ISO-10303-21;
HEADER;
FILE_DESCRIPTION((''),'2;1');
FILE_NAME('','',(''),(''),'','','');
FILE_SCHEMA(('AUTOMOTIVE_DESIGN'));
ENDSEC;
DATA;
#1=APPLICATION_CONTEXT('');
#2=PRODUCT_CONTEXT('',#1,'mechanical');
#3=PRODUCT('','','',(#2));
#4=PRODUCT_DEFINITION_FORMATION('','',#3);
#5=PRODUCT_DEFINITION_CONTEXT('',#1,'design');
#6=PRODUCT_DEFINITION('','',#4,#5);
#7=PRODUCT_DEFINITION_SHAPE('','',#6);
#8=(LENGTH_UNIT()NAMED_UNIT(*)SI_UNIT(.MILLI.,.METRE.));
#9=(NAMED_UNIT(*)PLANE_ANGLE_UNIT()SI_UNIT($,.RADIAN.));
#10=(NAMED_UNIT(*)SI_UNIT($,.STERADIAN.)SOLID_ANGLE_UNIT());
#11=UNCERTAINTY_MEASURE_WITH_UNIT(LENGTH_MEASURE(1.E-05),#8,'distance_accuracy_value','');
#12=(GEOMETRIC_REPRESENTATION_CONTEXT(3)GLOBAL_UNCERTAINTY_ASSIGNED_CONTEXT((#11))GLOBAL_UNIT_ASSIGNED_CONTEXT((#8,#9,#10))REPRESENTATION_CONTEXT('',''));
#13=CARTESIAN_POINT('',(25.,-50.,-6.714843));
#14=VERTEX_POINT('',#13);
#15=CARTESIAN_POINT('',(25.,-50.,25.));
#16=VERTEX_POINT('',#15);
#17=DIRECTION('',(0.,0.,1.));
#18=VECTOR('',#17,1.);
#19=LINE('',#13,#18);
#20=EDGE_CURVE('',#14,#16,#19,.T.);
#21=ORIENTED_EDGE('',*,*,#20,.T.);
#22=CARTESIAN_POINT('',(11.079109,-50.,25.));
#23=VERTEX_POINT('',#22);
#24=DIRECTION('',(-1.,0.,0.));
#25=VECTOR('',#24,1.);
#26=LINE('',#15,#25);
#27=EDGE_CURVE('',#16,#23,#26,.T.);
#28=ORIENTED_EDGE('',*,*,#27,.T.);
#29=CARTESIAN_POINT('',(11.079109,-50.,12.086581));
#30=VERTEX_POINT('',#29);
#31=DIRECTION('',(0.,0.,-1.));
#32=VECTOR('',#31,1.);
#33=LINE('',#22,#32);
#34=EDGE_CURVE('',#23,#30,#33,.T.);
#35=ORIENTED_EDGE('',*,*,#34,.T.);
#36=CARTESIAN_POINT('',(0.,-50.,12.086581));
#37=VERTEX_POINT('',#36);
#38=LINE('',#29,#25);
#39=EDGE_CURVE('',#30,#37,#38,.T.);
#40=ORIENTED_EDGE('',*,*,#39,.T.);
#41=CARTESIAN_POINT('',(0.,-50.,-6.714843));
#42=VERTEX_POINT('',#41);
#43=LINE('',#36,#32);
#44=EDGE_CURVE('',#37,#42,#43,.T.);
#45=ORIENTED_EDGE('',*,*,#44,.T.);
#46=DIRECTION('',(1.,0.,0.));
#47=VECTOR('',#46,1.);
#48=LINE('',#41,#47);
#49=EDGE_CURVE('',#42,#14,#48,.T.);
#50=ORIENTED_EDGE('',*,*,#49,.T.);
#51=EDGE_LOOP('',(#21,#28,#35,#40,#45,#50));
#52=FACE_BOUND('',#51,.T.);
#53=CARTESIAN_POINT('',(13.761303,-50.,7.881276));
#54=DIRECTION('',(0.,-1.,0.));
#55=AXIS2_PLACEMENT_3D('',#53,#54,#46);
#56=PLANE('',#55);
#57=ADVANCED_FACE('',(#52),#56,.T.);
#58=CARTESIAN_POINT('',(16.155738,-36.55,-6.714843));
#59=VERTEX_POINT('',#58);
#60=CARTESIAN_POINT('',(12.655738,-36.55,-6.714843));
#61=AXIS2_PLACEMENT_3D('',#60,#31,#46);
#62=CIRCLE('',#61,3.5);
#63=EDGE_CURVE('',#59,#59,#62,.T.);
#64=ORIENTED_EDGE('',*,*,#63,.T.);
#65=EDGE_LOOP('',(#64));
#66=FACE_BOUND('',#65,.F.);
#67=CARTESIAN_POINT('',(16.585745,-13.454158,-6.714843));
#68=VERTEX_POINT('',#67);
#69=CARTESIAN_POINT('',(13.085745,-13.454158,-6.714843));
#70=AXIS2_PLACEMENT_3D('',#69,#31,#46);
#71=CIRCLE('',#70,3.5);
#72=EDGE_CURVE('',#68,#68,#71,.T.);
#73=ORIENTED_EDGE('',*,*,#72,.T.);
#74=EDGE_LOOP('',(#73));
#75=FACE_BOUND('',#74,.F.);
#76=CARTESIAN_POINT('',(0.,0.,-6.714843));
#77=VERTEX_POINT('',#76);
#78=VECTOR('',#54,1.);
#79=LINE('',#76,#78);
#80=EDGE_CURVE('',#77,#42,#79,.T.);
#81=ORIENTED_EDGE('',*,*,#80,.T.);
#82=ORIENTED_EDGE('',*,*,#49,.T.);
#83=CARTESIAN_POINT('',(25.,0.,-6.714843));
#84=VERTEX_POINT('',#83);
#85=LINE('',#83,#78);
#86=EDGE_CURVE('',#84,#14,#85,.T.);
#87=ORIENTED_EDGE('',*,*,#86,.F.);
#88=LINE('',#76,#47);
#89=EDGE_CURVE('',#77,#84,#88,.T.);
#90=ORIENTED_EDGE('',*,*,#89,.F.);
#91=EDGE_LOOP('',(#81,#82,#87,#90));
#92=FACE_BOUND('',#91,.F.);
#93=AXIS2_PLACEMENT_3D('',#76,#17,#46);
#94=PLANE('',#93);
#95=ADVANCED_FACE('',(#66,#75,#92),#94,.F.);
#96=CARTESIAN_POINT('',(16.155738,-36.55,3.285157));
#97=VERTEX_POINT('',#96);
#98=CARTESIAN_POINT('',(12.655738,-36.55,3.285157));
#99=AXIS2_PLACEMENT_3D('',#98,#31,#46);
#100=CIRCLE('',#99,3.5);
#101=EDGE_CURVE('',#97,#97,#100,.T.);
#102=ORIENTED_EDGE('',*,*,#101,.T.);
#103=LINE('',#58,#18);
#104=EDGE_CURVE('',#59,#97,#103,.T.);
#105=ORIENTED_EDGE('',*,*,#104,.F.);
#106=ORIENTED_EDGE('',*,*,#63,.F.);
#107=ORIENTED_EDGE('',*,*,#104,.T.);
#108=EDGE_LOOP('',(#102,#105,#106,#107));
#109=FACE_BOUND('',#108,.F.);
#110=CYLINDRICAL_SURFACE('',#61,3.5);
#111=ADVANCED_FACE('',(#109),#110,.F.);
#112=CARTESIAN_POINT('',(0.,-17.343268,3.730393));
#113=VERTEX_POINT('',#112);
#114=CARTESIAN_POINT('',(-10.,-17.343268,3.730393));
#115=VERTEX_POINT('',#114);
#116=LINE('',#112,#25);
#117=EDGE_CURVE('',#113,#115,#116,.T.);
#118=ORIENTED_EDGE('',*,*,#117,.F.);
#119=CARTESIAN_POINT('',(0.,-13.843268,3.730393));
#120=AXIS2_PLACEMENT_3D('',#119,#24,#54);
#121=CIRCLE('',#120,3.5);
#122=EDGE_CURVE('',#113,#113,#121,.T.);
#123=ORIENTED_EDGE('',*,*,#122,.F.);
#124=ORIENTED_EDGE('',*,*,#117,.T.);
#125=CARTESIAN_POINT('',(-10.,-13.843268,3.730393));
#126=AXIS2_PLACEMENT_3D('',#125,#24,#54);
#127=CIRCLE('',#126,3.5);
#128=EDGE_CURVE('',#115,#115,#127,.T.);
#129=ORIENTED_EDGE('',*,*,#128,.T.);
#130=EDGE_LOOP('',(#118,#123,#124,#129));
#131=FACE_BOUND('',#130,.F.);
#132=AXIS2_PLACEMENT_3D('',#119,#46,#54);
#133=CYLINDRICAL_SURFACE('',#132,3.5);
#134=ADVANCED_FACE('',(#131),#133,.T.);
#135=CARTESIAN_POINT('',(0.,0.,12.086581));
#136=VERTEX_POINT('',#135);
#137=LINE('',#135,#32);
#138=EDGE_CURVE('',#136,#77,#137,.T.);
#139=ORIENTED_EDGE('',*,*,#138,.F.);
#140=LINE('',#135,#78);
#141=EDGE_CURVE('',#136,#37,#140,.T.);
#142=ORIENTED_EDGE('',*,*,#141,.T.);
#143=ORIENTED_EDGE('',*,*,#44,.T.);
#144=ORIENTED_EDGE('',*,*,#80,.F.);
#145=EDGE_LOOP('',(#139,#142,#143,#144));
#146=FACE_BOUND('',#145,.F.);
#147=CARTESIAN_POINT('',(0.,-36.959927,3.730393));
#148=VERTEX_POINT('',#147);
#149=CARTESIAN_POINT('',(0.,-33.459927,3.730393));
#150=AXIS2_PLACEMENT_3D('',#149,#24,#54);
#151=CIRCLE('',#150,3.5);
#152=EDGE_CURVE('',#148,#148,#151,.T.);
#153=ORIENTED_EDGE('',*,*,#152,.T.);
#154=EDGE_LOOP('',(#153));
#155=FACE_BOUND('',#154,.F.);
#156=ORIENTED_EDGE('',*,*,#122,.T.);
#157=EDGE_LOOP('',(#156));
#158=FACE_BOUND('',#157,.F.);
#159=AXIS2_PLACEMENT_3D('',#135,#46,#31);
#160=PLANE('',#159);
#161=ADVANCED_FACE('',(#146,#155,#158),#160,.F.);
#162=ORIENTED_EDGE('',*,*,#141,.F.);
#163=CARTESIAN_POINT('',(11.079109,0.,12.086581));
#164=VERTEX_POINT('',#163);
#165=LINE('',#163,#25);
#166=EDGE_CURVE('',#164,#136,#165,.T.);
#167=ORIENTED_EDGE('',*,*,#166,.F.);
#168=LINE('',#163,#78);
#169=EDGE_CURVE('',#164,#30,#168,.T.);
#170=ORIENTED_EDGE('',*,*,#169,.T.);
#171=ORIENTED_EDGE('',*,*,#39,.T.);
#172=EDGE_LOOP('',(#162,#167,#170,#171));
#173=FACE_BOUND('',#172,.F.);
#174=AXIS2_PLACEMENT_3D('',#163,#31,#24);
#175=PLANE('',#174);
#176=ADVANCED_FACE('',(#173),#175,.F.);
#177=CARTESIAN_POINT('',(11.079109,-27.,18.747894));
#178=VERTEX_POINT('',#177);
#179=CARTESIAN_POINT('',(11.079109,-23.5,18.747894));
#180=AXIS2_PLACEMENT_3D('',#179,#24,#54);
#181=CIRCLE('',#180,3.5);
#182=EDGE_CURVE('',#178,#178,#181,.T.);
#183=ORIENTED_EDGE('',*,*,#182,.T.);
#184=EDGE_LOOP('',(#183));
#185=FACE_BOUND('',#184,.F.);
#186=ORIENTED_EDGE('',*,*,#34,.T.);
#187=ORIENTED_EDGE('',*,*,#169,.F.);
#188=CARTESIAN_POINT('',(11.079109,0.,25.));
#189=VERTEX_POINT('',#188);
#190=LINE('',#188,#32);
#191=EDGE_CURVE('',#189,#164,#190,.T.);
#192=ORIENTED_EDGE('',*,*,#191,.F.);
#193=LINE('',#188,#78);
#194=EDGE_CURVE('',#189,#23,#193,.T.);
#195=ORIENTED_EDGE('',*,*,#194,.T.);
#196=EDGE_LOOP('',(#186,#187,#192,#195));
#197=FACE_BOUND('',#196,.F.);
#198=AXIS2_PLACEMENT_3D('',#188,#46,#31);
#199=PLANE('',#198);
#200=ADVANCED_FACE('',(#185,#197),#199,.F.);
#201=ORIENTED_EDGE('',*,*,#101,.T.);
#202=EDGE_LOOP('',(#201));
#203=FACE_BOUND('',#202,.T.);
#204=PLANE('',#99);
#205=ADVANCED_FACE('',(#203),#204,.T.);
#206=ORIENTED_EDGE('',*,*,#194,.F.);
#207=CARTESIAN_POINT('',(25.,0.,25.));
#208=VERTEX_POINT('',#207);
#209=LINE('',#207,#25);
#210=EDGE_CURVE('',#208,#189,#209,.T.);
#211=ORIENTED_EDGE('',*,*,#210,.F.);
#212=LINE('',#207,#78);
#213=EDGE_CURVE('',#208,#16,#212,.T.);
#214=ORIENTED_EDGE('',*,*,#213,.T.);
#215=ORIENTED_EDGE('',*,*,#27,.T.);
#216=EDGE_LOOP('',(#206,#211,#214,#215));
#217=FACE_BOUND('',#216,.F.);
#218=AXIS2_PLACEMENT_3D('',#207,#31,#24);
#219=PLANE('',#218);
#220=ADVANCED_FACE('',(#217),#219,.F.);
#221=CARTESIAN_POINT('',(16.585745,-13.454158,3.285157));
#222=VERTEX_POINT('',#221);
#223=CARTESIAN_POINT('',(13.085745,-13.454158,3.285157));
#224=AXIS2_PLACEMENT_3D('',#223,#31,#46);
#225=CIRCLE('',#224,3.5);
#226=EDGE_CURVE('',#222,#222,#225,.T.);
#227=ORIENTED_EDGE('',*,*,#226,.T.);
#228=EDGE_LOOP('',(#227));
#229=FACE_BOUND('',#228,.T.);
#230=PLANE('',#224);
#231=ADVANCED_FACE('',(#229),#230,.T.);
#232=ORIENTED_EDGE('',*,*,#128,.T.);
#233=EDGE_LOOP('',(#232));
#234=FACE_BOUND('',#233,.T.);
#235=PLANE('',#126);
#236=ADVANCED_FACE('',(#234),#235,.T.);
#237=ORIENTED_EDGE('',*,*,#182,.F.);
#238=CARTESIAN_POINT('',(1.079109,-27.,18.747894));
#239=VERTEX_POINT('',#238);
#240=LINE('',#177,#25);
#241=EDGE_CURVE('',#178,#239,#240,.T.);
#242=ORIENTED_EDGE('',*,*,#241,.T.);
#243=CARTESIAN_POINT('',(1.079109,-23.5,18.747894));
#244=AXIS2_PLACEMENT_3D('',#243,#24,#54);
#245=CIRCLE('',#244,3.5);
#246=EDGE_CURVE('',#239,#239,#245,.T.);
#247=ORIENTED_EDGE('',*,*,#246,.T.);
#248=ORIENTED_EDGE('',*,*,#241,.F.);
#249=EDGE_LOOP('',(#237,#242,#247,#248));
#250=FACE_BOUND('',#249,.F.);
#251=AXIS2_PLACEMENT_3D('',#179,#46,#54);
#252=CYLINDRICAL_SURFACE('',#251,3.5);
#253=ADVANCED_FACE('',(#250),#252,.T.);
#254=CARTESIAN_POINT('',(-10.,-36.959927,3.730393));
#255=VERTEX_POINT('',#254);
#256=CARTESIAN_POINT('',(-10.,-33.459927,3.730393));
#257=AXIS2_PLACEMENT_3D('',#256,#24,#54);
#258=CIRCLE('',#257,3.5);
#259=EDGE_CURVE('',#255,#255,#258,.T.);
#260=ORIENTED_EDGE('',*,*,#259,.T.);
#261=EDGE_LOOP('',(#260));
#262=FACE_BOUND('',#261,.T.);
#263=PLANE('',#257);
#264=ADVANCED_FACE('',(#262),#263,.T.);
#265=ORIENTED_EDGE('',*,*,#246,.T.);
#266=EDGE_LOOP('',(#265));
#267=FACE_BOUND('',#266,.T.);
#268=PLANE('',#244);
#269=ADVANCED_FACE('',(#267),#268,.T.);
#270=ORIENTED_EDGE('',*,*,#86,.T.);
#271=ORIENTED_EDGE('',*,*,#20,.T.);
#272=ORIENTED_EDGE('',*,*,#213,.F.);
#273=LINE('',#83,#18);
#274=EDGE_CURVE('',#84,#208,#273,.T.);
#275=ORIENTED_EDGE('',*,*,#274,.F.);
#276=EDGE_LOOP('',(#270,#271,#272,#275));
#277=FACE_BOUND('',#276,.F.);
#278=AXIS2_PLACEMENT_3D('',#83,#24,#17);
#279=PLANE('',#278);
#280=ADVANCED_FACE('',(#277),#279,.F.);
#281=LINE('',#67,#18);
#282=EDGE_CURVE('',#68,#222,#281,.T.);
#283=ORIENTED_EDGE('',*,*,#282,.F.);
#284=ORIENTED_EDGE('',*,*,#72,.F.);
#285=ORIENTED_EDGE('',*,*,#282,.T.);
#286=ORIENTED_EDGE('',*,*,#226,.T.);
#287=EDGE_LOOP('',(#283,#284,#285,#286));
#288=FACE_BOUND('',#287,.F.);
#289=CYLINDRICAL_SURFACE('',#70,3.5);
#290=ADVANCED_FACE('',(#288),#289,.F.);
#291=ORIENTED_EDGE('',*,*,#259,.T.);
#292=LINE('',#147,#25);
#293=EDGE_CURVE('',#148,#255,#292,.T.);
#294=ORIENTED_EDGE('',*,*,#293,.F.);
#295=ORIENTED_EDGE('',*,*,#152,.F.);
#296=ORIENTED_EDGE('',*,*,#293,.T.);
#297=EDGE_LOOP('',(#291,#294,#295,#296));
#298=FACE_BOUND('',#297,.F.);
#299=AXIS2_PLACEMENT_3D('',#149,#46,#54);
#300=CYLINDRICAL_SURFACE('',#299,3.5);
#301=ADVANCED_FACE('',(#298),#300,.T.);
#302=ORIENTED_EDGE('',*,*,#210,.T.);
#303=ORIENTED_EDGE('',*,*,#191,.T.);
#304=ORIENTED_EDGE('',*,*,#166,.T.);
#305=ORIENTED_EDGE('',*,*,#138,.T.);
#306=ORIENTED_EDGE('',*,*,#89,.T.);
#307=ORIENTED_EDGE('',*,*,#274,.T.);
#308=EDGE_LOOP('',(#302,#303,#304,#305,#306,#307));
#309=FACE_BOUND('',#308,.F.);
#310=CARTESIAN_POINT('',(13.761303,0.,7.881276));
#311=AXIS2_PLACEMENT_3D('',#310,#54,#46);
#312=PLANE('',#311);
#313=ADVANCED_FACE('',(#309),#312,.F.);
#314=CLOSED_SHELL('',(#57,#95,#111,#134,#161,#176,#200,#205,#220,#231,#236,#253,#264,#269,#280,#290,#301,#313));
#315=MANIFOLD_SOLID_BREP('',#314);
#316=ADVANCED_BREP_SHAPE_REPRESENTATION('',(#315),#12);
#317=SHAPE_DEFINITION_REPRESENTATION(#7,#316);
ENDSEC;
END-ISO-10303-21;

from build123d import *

# Parameters (mm, degrees)
F1_DEPTH = 50
F2_R     = 3.5
F3_DEPTH = 10
F4_R     = 3.5
F5_DEPTH = 10
F6_R     = 3.5
F7_DEPTH = 10


# Not quite as in the source:
# - a feature names something its author has since deleted; it is built from what else it names


with BuildPart() as f1:
    # F0 (on Front) → F1 (new body)
    with BuildSketch(Plane.XZ):
        Polygon((0, -6.7148432136), (25, -6.7148432136), (25, 25), (11.0791092739, 25), (11.0791092739, 12.0865814388), (0, 12.0865814388), align=None)
    extrude(amount=F1_DEPTH)

    # F2 (on face) → F3 (join)
    with BuildSketch(Plane(origin=(0, 0, 0), x_dir=(0, -1, 0), z_dir=(-1, 0, 0))):
        with Locations((13.8432676521, 3.730392782)):
            Circle(F2_R)
        with Locations((33.459926671, 3.730392782)):
            Circle(F2_R)
    extrude(amount=F3_DEPTH)

    # F4 (on face) → F5 (cut)
    with BuildSketch(Plane(origin=(0, 0, -6.7148432136), x_dir=(1, 0, 0), z_dir=(0, 0, -1))):
        with Locations((12.6557382198, 36.55)):
            Circle(F4_R)
        with Locations((13.0857451583, 13.4541578871)):
            Circle(F4_R)
    extrude(amount=-F5_DEPTH, mode=Mode.SUBTRACT)

    # F6 (on face) → F7 (join)
    with BuildSketch(Plane(origin=(11.0791092739, 0, 0), x_dir=(0, -1, 0), z_dir=(-1, 0, 0))):
        with Locations((23.5, 18.7478940934)):
            Circle(F6_R)
    extrude(amount=F7_DEPTH)


solid = f1.part
